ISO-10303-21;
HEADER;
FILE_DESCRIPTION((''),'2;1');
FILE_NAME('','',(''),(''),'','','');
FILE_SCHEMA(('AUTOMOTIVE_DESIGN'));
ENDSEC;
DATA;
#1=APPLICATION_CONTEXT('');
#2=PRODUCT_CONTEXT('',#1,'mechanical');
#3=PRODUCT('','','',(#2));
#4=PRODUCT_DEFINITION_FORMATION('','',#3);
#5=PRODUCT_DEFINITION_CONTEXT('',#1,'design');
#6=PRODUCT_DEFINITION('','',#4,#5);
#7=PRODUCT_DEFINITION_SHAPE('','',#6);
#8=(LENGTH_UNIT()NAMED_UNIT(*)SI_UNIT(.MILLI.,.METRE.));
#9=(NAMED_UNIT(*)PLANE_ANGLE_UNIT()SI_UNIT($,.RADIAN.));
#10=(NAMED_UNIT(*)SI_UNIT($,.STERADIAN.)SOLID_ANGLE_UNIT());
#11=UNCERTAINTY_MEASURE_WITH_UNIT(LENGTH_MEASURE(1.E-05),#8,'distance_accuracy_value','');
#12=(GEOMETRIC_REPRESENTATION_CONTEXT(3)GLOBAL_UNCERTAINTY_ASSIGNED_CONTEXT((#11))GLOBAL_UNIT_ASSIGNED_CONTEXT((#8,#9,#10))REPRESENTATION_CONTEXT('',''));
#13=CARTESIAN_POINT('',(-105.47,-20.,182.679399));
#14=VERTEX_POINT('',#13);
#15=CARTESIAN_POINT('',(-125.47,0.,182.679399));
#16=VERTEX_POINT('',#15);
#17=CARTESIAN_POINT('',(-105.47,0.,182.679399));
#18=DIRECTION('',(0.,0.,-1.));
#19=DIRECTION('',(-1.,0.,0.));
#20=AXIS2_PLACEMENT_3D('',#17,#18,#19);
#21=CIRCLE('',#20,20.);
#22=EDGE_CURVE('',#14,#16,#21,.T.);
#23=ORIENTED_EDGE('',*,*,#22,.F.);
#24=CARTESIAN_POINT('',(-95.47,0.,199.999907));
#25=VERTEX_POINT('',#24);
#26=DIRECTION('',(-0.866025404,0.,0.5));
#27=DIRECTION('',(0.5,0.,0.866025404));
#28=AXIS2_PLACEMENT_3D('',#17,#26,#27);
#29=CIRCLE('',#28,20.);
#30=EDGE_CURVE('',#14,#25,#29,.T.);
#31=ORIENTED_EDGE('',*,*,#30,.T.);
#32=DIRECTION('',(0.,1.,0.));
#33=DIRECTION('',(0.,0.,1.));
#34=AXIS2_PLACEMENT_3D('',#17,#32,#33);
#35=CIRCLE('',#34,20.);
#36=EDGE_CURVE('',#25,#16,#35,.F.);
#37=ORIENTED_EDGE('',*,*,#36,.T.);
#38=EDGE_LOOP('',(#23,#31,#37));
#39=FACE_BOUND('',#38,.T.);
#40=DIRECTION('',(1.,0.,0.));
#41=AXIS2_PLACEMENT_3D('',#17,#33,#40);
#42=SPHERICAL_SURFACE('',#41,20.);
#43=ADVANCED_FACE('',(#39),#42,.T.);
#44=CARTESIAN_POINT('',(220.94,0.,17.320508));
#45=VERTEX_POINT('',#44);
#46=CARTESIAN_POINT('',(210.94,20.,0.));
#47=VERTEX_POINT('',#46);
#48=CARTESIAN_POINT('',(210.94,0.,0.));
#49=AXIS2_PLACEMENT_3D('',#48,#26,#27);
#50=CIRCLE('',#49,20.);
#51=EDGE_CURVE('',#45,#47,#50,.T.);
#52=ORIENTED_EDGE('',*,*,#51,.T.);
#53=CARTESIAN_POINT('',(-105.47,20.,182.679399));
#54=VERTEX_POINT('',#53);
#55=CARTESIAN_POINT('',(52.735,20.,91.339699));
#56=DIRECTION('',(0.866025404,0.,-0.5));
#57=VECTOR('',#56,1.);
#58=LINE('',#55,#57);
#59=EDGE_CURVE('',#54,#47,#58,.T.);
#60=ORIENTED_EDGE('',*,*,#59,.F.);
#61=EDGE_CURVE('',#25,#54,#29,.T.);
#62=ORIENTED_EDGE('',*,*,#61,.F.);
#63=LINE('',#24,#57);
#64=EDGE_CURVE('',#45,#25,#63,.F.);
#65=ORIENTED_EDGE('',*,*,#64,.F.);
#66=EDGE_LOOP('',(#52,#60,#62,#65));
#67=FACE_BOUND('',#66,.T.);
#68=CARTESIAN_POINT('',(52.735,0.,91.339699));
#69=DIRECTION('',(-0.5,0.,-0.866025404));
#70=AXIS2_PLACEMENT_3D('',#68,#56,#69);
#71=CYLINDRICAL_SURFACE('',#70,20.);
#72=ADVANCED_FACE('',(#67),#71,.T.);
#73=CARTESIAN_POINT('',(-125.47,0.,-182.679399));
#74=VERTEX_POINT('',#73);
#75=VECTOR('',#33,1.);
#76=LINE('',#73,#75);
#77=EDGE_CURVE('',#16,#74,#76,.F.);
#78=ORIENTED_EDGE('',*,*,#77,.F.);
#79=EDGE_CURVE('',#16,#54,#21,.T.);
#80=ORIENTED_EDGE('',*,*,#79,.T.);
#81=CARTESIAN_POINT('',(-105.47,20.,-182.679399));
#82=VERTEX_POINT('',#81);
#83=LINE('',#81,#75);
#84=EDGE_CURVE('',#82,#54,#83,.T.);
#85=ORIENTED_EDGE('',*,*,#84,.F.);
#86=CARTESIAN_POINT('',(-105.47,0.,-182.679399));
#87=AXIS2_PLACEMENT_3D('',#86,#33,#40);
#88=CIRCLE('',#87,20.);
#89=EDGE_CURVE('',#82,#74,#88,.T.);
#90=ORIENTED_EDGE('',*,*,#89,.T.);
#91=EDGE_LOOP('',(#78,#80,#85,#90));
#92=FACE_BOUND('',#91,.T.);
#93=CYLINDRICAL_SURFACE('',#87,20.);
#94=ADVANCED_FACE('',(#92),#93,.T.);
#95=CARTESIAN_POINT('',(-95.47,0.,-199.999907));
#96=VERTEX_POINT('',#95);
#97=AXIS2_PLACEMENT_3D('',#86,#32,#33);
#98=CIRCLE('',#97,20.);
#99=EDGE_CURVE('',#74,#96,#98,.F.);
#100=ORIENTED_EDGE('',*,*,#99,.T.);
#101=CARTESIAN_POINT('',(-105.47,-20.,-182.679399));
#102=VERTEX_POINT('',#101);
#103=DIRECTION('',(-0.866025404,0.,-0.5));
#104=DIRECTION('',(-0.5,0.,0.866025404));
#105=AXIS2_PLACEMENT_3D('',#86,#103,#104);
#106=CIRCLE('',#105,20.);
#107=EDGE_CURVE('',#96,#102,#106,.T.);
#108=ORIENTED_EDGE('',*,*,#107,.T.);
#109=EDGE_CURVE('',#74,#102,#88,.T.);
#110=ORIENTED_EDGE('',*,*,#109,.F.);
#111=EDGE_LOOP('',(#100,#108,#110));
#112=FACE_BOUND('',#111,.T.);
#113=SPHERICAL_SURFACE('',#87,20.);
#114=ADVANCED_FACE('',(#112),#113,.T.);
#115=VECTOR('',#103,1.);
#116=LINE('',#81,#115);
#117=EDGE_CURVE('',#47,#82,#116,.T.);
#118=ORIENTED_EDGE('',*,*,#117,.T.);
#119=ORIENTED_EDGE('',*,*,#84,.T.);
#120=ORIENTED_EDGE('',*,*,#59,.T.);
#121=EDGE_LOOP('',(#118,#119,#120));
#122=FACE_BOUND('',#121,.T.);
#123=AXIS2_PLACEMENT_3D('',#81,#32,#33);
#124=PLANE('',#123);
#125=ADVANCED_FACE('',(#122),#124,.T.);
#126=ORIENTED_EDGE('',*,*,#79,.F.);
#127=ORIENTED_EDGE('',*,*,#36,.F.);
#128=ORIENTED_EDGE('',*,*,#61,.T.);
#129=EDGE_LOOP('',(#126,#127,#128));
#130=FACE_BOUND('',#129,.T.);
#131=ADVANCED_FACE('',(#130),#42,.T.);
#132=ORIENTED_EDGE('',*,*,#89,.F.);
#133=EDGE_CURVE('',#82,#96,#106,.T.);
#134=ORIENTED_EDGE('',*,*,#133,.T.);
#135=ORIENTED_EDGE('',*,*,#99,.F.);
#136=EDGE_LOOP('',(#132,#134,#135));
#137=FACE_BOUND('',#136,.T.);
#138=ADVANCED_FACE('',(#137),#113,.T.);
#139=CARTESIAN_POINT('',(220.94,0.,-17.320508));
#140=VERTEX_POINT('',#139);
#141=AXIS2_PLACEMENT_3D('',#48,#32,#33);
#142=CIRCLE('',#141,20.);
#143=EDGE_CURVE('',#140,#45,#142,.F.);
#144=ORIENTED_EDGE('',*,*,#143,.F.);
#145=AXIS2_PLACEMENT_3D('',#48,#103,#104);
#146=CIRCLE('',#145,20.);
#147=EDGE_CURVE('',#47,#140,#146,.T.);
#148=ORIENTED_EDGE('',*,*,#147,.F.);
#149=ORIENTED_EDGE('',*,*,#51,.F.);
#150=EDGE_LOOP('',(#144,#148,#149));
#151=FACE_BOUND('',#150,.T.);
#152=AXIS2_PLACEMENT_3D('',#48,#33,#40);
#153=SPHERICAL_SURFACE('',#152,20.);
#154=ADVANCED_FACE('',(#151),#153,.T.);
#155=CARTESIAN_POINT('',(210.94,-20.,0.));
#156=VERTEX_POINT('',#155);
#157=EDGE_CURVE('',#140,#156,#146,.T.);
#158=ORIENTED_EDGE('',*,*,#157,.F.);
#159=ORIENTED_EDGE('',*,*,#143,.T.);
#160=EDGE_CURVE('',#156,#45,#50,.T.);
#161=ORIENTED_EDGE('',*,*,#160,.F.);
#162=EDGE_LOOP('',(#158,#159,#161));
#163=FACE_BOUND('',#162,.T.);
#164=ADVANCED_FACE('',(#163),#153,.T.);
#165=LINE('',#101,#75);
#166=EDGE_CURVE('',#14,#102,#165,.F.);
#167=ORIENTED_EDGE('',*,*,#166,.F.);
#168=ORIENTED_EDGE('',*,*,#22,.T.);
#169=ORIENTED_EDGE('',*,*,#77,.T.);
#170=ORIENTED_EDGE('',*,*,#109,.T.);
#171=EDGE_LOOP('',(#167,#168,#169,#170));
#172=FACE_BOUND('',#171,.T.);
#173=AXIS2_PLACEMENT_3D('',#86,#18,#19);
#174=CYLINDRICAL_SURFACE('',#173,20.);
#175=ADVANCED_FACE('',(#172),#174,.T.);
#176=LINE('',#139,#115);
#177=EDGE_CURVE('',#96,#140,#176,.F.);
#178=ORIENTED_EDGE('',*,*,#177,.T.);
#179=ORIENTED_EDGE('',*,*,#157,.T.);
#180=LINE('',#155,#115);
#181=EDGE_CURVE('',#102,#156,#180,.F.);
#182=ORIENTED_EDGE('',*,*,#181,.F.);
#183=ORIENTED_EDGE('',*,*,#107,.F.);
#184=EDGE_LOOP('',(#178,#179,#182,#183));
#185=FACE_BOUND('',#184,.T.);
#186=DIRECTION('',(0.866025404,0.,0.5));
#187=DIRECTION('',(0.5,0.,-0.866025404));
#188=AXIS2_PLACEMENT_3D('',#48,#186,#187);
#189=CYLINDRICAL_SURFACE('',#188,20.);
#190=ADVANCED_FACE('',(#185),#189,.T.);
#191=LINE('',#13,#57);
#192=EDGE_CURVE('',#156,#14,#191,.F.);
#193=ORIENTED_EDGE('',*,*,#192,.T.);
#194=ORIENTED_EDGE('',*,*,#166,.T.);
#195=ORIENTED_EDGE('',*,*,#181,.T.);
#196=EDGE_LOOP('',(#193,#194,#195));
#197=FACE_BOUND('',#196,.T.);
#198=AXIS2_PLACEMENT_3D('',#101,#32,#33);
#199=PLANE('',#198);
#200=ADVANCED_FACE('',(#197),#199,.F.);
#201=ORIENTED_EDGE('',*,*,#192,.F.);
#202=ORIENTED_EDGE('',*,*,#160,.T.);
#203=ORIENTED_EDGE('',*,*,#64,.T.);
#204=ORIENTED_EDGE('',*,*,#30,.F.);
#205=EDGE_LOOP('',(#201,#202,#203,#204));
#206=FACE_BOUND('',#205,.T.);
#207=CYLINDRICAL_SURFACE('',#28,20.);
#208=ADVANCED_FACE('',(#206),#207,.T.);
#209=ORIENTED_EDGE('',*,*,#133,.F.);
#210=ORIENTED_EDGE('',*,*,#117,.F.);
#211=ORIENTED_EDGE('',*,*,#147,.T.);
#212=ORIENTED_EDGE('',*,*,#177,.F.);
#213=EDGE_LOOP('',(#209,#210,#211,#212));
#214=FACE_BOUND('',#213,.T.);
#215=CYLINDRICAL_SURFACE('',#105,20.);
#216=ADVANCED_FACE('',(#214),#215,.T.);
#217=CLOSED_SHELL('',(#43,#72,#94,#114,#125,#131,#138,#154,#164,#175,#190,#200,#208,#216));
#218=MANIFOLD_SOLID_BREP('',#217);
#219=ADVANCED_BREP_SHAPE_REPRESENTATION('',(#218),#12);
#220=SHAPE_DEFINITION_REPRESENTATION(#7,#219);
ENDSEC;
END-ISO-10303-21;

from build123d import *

# Parameters (mm, degrees)
BOSS_EXTRUDE1_DEPTH        = 20
BOSS_EXTRUDE1_DEPTH_BACK   = 20
SKETCH1_R                  = 9.5041e-05
BOSS_EXTRUDE1_2_DEPTH      = 20
BOSS_EXTRUDE1_2_DEPTH_BACK = 20
FILLET1_R                  = 20


with BuildPart() as part:
    # Sketch1 → Boss-Extrude1 (new, two sides: drawn at the far end of the back side and taken through both)
    with BuildSketch(Plane(origin=(0, 0, 0), x_dir=(1, 0, 0), z_dir=(0, 1, 0)).offset(-BOSS_EXTRUDE1_DEPTH_BACK)):
        with Locations(Location((250.94, 0, 0), (0, 0, 270))):
            Circle(SKETCH1_R)
    extrude(amount=BOSS_EXTRUDE1_DEPTH + BOSS_EXTRUDE1_DEPTH_BACK)


with BuildPart() as body_2:
    # Sketch1 → Boss-Extrude1 2 (new, two sides: drawn at the far end of the back side and taken through both)
    with BuildSketch(Plane(origin=(0, 0, 0), x_dir=(1, 0, 0), z_dir=(0, 1, 0)).offset(-BOSS_EXTRUDE1_2_DEPTH_BACK)):
        with BuildLine():
            Line((220.94, 17.320508076), (-95.47, 199.99990675))
            ThreePointArc((-95.47, 199.99990675), (-115.47, 199.99990675), (-125.47, 182.679398674))
            Line((-125.47, 182.679398674), (-125.47, -182.679398674))
            ThreePointArc((-125.47, -182.679398674), (-115.47, -199.99990675), (-95.47, -199.99990675))
            Line((-95.47, -199.99990675), (220.94, -17.320508076))
            ThreePointArc((220.94, -17.320508076), (230.94, 0), (220.94, 17.320508076))
        make_face()
    extrude(amount=BOSS_EXTRUDE1_2_DEPTH + BOSS_EXTRUDE1_2_DEPTH_BACK)

    # Fillet1
    fillet1_edges = [body_2.edges().sort_by_distance(p)[0] for p in [
        (-125.47, -20, 0),
        (-115.47, -20, 199.99990675),
        (62.735, -20, 108.660207413),
        (230.94, -20, 0),
        (62.735, -20, -108.660207413),
        (-115.47, -20, -199.99990675),
        (-115.47, 20, -199.99990675),
        (62.735, 20, -108.660207413),
        (230.94, 20, 0),
        (62.735, 20, 108.660207413),
        (-115.47, 20, 199.99990675),
        (-125.47, 20, 0),
    ]]
    fillet(fillet1_edges, radius=FILLET1_R - 0.0001)  # a hair under: the kernel refuses the full size


solid = body_2.part
